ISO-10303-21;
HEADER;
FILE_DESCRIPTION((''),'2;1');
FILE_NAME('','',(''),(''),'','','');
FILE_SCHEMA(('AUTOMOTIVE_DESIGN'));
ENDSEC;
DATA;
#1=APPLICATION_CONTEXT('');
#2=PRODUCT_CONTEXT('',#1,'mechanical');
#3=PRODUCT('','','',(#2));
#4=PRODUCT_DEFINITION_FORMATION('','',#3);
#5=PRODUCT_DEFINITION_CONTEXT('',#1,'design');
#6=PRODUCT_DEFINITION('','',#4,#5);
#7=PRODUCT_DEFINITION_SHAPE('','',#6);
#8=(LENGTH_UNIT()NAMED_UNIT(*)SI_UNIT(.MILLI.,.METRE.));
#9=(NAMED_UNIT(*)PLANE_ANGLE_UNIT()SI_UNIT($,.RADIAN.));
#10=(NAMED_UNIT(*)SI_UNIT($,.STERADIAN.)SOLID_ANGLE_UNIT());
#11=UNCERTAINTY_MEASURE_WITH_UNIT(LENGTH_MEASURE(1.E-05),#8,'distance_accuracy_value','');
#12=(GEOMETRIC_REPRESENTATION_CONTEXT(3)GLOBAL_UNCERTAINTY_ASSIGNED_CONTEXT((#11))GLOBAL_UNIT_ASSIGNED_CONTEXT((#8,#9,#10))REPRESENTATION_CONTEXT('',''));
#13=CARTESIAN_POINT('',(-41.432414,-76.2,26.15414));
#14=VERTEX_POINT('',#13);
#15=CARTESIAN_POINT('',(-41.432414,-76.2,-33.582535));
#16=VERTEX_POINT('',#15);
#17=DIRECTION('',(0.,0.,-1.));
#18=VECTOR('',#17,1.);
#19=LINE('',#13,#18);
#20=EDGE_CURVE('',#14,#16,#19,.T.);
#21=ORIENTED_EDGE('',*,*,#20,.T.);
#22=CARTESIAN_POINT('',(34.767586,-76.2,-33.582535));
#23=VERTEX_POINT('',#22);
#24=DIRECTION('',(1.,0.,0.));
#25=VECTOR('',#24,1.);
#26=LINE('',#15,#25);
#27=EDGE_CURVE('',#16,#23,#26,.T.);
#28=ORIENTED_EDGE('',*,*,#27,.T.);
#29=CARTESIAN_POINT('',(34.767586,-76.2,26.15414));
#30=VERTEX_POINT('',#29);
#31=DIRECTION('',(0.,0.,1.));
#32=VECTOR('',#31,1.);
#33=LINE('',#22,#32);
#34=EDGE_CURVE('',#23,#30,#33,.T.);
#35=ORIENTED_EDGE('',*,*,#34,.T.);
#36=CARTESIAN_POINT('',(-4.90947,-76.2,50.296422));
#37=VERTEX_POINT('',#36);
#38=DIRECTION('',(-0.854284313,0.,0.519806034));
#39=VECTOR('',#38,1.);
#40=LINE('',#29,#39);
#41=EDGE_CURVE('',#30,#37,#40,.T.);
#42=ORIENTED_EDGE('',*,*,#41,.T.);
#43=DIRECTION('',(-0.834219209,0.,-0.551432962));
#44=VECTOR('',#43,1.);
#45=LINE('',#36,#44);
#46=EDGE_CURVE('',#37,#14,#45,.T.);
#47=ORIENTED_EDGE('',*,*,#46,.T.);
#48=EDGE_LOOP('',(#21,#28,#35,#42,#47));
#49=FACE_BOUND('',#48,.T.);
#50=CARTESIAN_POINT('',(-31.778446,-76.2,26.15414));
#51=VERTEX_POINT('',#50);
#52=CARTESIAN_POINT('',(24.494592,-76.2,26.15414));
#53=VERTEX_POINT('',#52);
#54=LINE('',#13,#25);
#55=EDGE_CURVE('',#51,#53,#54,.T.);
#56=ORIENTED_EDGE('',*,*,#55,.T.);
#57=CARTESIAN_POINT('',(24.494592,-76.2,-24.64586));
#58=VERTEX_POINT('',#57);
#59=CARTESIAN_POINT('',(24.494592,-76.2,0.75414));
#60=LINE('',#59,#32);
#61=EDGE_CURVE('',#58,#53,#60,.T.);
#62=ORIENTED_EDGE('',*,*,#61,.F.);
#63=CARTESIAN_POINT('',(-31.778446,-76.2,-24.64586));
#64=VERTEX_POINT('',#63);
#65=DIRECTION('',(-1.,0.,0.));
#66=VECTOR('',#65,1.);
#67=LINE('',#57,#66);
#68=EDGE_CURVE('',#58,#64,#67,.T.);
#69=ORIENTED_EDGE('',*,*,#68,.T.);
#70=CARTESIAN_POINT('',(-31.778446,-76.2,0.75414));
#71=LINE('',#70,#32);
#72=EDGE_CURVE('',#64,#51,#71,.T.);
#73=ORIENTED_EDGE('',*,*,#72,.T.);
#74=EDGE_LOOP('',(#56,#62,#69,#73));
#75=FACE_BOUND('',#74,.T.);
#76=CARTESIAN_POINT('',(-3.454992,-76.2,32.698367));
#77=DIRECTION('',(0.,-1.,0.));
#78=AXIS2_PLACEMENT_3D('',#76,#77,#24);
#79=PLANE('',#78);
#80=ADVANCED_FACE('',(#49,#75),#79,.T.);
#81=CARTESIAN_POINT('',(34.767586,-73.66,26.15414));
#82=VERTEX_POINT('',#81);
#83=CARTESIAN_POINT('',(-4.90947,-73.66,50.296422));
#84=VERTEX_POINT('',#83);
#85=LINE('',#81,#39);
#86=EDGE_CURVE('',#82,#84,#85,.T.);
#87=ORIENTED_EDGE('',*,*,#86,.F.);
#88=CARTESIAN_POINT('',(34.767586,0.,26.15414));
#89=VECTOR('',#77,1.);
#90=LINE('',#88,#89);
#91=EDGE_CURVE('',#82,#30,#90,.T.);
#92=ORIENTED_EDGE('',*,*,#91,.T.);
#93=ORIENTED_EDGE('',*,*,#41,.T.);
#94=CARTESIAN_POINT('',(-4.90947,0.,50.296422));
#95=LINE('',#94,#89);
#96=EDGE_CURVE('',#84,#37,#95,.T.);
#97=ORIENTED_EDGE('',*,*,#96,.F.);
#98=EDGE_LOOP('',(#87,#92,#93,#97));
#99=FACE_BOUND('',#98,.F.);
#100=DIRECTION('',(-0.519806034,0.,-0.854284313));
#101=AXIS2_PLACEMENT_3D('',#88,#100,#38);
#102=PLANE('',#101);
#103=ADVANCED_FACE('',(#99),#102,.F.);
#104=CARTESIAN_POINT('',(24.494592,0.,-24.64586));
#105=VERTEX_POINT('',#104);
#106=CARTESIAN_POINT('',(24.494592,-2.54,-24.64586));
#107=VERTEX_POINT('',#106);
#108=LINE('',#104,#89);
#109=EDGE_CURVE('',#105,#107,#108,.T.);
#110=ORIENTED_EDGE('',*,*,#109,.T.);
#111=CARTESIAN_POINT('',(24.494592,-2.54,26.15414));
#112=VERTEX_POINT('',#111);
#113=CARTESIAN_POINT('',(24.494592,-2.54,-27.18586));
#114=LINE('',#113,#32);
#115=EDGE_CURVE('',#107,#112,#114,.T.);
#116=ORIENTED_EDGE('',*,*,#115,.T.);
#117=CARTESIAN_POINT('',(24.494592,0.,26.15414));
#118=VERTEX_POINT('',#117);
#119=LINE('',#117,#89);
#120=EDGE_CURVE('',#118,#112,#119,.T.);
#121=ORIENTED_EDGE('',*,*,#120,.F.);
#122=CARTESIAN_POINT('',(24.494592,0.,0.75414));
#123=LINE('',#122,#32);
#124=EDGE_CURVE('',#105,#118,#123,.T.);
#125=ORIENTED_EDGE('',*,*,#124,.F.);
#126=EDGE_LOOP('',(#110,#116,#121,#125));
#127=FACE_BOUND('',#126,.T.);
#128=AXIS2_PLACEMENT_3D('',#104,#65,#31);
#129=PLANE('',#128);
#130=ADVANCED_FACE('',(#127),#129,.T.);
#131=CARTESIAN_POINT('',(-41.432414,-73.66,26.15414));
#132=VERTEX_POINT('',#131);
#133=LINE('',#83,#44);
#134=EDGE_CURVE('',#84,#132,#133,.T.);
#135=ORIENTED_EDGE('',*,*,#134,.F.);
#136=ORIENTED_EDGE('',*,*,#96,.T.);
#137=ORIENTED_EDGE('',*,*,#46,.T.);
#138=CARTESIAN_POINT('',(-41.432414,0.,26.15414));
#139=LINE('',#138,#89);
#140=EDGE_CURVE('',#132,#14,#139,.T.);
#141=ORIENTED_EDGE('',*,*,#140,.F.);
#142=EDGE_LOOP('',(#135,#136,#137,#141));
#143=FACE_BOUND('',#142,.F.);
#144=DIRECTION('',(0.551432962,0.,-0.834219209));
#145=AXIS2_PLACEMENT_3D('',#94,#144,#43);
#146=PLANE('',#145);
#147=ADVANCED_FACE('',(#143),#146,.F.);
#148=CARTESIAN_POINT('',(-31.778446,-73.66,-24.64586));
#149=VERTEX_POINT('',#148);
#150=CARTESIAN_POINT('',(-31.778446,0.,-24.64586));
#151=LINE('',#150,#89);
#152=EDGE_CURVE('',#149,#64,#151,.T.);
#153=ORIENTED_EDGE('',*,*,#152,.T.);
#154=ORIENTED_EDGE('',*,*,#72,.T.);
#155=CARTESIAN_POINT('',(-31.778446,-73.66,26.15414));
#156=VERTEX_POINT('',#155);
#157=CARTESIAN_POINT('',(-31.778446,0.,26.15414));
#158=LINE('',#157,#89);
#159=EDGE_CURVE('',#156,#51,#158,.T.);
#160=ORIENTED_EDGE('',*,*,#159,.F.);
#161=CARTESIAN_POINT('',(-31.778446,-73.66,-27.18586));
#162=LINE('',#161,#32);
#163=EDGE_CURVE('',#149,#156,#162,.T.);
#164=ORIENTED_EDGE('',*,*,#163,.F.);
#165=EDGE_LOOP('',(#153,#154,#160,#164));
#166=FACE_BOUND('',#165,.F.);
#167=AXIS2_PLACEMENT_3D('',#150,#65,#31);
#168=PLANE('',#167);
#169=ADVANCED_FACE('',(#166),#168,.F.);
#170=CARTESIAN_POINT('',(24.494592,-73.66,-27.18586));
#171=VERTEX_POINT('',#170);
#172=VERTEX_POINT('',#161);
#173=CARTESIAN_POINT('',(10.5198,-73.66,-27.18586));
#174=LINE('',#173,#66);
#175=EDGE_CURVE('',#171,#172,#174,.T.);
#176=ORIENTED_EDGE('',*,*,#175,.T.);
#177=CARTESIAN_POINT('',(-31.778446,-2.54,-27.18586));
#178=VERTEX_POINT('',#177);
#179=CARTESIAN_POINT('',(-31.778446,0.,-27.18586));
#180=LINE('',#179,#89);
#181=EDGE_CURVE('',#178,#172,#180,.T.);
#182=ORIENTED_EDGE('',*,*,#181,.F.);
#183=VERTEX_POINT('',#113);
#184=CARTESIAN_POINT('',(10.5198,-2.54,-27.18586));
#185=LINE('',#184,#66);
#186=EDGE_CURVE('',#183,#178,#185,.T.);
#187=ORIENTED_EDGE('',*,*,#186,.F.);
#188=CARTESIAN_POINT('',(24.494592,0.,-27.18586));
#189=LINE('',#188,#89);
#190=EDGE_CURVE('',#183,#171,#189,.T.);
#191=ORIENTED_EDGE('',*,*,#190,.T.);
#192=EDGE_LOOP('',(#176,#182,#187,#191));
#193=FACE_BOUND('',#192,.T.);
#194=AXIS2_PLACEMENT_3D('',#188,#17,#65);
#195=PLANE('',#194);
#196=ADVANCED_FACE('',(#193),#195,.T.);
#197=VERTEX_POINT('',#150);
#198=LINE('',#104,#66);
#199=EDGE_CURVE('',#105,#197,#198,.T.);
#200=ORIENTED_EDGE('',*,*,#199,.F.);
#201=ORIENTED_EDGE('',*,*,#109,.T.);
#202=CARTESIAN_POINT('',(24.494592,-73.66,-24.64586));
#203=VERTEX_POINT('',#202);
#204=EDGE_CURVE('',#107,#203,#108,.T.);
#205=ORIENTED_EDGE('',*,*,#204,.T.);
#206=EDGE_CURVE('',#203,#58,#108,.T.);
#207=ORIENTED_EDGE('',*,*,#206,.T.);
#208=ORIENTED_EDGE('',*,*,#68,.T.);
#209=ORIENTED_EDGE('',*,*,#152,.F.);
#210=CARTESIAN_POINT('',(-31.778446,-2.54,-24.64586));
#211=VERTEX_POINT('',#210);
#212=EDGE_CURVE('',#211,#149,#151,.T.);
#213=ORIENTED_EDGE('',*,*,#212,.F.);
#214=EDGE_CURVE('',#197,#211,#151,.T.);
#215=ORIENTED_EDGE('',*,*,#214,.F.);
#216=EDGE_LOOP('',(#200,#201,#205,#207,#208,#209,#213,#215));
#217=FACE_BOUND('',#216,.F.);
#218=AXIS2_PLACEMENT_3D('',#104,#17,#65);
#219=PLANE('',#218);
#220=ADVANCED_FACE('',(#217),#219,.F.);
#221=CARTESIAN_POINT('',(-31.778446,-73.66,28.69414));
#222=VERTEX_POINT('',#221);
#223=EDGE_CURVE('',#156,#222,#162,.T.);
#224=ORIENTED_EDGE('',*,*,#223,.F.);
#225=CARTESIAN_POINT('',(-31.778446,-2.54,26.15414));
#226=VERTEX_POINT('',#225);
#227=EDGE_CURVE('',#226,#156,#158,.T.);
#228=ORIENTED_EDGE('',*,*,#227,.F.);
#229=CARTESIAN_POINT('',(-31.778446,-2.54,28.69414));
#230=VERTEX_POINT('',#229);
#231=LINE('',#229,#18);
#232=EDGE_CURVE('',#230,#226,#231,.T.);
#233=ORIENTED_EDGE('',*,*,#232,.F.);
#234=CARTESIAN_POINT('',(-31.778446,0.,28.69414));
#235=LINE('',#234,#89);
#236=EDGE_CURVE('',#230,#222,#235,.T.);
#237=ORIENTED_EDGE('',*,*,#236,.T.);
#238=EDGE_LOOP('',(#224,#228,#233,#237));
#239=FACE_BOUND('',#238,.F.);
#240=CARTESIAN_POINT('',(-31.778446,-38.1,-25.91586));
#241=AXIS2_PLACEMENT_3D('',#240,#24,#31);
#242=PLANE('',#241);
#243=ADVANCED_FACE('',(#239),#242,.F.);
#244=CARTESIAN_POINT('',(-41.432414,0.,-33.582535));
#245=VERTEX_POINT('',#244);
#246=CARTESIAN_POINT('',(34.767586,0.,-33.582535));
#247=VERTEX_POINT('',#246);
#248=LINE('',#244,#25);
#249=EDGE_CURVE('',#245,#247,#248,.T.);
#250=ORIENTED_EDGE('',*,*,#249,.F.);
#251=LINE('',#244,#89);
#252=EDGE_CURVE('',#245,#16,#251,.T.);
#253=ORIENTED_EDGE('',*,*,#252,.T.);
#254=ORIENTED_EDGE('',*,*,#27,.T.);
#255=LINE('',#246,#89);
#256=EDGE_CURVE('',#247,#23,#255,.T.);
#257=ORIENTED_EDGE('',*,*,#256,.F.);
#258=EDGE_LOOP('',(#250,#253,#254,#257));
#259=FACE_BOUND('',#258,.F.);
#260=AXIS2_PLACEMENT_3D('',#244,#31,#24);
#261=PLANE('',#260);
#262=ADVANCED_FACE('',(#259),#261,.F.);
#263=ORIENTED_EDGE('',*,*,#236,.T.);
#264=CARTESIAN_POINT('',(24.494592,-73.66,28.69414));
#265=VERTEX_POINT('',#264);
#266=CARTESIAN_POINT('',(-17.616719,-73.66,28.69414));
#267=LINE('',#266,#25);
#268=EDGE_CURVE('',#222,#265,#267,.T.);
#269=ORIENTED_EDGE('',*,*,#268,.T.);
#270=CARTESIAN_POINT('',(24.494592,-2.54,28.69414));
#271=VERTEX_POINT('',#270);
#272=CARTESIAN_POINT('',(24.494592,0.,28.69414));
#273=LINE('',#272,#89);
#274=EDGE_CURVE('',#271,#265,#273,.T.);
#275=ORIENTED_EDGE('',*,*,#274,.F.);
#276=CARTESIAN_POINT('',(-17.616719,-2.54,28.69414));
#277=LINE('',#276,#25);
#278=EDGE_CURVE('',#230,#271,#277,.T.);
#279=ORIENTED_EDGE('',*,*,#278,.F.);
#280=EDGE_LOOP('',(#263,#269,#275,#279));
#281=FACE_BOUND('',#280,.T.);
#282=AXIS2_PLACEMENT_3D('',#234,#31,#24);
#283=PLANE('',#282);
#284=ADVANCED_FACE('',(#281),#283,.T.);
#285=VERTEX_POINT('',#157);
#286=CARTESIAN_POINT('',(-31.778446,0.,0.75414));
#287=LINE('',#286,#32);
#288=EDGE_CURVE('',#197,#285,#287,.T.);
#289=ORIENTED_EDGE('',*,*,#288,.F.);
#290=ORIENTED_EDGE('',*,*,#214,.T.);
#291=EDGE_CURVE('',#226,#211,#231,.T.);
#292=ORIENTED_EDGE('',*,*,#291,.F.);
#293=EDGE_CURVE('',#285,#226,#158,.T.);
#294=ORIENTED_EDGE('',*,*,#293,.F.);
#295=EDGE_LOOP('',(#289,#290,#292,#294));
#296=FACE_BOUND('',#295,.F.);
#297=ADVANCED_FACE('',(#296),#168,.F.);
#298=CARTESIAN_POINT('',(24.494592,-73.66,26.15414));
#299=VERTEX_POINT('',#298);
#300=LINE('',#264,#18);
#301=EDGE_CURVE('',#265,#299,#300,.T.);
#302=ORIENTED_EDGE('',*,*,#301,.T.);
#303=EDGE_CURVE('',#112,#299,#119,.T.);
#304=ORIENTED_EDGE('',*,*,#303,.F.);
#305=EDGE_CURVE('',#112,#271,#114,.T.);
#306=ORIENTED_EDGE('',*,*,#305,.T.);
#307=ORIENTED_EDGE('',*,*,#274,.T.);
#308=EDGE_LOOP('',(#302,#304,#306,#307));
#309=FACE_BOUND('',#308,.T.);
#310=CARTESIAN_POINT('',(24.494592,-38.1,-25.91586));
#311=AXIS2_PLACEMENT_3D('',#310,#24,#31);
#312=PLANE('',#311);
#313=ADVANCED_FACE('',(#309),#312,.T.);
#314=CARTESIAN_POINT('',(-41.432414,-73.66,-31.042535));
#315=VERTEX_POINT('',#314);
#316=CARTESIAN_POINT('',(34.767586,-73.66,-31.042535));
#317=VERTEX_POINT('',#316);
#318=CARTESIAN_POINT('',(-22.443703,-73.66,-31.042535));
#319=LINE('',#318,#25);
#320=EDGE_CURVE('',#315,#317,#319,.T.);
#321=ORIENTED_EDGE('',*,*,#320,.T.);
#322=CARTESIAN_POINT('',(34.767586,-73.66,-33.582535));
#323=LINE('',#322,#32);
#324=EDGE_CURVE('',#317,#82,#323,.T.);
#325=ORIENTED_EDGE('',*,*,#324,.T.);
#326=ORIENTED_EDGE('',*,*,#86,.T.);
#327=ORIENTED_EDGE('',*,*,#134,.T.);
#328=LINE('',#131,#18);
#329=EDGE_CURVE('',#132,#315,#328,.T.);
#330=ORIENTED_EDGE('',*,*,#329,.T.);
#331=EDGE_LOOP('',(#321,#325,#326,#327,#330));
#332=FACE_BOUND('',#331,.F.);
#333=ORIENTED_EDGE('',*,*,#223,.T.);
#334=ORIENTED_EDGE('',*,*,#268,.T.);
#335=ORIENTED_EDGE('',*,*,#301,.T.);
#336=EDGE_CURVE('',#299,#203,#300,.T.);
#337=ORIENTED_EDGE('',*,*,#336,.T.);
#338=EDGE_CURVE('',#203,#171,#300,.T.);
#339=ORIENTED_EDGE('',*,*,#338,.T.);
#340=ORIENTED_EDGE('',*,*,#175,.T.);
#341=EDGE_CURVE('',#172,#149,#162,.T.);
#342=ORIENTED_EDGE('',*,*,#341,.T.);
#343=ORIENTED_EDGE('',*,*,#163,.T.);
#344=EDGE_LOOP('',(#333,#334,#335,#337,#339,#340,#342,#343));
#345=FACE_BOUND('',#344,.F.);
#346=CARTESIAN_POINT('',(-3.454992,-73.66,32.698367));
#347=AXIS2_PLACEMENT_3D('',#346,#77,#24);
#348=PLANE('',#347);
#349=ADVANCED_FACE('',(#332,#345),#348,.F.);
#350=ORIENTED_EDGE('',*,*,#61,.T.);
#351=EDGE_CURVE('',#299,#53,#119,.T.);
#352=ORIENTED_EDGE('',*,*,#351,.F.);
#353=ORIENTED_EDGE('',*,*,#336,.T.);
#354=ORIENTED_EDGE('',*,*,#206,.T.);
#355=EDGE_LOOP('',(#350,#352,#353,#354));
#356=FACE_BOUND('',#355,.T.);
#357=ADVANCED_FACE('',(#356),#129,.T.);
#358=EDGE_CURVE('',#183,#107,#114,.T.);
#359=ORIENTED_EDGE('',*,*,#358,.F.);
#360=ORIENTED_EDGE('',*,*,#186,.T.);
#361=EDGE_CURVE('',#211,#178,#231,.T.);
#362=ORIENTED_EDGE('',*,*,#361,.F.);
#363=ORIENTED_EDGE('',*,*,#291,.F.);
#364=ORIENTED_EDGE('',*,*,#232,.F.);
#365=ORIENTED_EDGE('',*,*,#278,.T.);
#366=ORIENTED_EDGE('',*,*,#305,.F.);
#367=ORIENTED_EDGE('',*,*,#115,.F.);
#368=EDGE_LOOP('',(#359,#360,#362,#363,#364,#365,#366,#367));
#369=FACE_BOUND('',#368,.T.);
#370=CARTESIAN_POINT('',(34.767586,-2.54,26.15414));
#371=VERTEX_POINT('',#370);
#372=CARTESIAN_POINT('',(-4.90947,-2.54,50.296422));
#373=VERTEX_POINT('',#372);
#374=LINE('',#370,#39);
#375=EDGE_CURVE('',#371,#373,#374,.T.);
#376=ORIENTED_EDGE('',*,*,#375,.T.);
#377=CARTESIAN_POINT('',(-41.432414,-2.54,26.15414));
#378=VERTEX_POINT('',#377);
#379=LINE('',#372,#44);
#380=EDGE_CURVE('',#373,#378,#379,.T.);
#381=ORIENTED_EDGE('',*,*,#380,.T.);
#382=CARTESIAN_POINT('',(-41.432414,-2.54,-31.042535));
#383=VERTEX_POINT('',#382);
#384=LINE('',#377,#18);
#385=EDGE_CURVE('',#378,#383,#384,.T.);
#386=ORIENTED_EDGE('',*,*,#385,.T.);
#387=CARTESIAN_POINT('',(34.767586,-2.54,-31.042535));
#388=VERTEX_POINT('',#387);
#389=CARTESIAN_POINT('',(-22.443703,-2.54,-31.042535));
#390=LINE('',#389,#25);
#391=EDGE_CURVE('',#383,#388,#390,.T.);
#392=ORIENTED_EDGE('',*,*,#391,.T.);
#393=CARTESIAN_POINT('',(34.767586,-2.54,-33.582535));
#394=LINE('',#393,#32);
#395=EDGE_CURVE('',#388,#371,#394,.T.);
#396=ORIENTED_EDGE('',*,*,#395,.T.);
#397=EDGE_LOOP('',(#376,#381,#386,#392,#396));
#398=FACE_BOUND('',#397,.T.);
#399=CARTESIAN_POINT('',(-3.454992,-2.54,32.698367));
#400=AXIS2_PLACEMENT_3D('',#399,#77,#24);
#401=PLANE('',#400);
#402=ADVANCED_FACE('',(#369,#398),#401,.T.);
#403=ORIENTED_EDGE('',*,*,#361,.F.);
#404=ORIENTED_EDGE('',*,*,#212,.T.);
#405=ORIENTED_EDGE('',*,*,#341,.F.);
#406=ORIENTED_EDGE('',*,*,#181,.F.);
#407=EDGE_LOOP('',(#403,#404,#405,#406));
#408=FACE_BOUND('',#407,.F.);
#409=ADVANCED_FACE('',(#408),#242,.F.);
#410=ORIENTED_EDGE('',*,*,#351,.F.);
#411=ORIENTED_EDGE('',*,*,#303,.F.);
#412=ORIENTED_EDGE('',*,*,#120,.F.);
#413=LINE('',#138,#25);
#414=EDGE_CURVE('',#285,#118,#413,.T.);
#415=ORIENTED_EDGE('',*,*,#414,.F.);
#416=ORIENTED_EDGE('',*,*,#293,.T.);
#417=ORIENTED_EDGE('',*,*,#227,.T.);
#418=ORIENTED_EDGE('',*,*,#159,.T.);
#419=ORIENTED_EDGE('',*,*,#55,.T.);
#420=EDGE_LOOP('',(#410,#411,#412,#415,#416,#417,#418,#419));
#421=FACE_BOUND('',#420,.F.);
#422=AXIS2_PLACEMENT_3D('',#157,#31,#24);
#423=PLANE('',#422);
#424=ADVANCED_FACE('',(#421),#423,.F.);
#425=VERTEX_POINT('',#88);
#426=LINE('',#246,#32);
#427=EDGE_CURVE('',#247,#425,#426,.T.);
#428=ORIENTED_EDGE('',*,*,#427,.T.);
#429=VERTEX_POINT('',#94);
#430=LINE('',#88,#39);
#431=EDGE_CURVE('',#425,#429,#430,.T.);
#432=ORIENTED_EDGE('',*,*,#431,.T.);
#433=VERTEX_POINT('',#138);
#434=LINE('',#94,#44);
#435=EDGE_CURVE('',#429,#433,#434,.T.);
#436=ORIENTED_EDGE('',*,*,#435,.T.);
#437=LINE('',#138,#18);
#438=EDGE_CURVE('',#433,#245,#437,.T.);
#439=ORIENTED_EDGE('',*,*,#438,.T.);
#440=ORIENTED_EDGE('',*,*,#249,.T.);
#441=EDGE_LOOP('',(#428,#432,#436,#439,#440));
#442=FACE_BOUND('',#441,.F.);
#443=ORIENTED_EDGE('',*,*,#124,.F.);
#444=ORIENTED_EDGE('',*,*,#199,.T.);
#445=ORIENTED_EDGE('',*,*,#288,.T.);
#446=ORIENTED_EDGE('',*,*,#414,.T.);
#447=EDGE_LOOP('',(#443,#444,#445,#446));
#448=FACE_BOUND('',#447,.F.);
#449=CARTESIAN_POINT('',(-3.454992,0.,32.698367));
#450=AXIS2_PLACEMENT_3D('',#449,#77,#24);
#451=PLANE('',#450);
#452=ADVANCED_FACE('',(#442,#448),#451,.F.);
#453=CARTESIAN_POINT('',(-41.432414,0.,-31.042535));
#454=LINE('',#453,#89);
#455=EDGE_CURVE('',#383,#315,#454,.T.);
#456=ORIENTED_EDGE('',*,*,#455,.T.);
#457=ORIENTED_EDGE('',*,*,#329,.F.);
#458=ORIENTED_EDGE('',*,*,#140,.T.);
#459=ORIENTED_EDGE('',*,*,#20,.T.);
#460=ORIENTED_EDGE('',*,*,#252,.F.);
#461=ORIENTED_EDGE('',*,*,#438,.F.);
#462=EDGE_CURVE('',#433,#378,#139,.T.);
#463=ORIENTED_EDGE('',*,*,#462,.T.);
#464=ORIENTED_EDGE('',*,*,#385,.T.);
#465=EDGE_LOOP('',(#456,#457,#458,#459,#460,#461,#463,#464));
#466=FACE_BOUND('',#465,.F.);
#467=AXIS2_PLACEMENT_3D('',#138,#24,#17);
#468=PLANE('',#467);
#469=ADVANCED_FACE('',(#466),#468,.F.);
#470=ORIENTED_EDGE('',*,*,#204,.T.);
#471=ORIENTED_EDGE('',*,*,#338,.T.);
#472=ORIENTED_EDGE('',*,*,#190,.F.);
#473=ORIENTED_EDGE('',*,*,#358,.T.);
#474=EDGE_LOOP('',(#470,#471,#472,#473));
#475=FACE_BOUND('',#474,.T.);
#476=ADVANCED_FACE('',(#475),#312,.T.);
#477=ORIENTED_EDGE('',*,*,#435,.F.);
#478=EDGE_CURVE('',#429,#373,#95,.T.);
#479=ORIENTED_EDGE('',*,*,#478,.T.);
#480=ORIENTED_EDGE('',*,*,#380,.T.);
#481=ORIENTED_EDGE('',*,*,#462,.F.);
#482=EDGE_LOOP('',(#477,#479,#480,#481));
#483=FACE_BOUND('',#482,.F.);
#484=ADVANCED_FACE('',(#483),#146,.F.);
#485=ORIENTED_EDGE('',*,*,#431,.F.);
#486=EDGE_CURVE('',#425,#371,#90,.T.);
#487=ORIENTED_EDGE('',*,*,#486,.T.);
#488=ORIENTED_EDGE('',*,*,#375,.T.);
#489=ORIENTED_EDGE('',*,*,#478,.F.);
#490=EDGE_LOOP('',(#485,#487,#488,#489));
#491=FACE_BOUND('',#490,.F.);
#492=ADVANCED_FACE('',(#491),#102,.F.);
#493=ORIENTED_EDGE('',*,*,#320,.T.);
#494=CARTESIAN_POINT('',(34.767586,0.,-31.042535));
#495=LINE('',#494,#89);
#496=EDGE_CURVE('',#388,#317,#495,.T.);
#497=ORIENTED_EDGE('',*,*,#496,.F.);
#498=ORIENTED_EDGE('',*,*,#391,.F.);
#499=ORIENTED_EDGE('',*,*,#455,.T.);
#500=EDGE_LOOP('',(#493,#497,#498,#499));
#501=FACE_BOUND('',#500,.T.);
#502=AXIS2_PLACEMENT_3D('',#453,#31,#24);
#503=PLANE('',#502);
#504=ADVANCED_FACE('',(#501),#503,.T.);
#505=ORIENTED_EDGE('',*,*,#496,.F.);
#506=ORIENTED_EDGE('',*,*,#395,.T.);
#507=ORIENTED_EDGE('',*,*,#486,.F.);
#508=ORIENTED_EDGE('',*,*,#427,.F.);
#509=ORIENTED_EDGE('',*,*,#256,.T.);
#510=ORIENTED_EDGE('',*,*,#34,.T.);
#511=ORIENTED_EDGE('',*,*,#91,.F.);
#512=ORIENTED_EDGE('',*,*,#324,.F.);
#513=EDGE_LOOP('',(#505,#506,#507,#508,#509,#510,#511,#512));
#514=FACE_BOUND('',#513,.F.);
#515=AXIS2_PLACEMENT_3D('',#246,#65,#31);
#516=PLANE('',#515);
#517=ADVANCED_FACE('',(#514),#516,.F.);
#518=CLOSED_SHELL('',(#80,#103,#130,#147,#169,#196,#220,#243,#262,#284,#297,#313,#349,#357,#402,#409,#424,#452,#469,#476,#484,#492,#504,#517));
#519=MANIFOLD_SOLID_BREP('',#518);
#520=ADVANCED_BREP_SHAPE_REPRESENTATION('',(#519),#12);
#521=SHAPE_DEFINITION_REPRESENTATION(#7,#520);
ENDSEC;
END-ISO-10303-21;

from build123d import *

# Parameters (mm, degrees)
F0_W     = 10.2729936957
F0_H     = 50.8
F0_W_2   = 9.6539677948
F1_DEPTH = 76.2
F2_T     = 2.54


# Not quite as in the source:
# - a shell that OpenCascade refuses in one call is made with other operations: the cavity is built on its own and cut out


with BuildPart() as f1:
    # F0 (on Front) → F1 (new body)
    with BuildSketch(Plane.XZ):
        Polygon((-4.9094697461, 50.2964220941), (-41.4324142039, 26.1541400105), (-31.7784464091, 26.1541400105), (24.4945921004, 26.1541400105), (34.7675857961, 26.1541400105), align=None)
        with Locations((29.6310889482, 0.7541400105)):
            Rectangle(F0_W, F0_H)
        with Locations((-36.6054303065, 0.7541400105)):
            Rectangle(F0_W_2, F0_H)
        Polygon((-31.7784464091, -24.6458599895), (-41.4324142039, -24.6458599895), (-41.4324142039, -33.582534641), (34.7675857961, -33.582534641), (34.7675857961, -24.6458599895), (24.4945921004, -24.6458599895), align=None)
    extrude(amount=F1_DEPTH)

    # F2: shell of thickness 2.54, made by hand


with BuildPart() as f2_core1:
    # F2_t2: copy of F1
    add(f1.part)

    # the walls: a layer under each face that stays
    f2_faces = [f2_core1.faces().sort_by_distance(p)[0] for p in [
        (-3.3324142039, -38.1, -33.582534641),
        (-3.6419271544, -38.1, 26.1541400105),
        (-3.6419271544, -38.1, -24.6458599895),
        (-3.3324142039, 0, 36.3165959716),
        (-3.3324142039, -76.2, 36.3165959716),
    ]]
    thicken(f2_faces, amount=-F2_T, mode=Mode.SUBTRACT)


with BuildPart() as f1_1:
    add(f1.part)

    # what is left inside the walls is the cavity
    f2_cavity = [f2_core1.part.solids().sort_by_distance(p)[0] for p in [
        (-3.332414, -49.953333, -31.017135),
    ]]
    add(f2_cavity, mode=Mode.SUBTRACT)


solid = f1_1.part
